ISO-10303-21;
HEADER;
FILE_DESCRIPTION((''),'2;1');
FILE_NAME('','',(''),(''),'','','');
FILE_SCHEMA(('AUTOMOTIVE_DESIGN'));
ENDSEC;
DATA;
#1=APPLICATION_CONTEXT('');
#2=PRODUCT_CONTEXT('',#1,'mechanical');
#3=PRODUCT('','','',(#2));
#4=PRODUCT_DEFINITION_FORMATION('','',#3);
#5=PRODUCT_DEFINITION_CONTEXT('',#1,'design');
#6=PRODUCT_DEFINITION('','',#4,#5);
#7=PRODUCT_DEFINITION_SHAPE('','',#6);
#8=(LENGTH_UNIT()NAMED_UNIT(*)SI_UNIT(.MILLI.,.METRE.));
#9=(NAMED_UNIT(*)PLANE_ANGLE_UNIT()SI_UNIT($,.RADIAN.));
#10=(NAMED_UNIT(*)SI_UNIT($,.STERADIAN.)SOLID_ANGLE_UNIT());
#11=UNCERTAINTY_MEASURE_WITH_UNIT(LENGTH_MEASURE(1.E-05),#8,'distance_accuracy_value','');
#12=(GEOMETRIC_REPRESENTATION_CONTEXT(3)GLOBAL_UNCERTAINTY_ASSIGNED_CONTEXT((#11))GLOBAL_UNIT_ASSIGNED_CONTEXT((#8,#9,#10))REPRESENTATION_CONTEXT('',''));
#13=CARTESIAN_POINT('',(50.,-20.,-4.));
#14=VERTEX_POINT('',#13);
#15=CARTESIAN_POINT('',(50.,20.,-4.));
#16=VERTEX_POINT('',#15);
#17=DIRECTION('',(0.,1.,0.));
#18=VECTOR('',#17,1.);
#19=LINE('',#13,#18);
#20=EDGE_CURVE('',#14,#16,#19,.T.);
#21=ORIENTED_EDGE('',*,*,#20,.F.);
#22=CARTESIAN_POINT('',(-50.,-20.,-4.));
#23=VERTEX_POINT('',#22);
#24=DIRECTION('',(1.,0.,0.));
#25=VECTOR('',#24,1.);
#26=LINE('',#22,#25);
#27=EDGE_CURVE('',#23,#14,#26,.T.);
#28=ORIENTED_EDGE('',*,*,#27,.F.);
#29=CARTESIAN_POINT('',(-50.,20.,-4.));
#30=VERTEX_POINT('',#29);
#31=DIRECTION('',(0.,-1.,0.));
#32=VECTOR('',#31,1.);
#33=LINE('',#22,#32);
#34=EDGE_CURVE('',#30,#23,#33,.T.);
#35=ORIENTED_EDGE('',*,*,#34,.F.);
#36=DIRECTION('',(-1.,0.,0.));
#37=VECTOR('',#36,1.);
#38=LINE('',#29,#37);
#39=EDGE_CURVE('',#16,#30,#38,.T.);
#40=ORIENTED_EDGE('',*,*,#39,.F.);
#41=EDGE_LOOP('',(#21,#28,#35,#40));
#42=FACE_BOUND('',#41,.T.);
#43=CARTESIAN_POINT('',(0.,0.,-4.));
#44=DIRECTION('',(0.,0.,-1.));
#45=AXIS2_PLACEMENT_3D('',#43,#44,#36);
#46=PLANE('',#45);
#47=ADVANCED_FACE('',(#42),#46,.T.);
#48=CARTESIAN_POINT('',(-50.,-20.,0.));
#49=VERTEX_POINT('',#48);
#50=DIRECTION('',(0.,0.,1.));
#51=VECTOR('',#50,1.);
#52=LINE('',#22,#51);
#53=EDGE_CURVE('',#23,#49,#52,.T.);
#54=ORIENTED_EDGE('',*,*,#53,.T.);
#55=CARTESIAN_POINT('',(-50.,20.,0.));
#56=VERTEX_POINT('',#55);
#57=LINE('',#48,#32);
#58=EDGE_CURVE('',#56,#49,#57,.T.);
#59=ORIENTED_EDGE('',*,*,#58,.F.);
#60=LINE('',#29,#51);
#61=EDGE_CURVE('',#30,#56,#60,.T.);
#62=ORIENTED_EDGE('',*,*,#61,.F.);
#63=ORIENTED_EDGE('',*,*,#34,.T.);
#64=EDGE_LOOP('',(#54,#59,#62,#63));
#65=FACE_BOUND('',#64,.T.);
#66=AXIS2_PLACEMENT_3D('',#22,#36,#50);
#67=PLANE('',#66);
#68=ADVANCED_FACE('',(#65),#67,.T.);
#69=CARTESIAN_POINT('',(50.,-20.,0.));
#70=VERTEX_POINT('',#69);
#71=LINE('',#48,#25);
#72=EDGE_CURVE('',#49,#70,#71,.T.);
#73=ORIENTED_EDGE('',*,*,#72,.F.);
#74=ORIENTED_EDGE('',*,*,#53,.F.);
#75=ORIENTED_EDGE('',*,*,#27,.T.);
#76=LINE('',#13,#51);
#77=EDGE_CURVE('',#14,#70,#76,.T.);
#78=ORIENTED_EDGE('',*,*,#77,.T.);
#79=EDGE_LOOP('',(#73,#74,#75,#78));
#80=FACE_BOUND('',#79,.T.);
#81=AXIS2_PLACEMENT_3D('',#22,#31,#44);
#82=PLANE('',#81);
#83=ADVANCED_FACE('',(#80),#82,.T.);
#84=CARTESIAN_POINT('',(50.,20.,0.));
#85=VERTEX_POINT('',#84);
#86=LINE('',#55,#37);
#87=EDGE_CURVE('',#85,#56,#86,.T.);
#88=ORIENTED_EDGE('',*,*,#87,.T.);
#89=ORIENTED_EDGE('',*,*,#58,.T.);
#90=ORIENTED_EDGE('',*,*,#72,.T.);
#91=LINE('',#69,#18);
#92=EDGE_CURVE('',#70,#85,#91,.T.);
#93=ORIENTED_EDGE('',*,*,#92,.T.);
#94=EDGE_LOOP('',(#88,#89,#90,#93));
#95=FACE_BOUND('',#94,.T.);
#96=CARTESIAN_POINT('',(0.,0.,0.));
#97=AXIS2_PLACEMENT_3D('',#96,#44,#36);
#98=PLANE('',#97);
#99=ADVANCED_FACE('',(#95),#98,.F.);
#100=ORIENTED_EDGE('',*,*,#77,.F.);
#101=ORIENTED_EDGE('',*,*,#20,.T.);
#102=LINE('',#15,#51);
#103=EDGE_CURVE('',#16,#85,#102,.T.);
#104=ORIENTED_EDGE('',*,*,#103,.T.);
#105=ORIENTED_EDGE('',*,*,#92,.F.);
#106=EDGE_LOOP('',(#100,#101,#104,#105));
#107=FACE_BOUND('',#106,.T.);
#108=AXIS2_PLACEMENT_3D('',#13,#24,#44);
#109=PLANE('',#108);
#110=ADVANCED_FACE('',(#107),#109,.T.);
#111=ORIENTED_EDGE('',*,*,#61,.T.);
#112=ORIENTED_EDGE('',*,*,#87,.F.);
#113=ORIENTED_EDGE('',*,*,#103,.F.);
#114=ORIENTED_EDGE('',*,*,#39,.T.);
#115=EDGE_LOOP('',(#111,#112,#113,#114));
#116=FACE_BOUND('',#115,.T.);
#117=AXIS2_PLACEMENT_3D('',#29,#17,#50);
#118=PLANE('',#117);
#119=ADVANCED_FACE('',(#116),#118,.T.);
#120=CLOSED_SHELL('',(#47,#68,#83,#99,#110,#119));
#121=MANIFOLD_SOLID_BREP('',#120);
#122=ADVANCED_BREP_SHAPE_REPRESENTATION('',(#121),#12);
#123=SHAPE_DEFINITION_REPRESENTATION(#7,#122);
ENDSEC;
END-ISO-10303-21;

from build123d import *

# Parameters (mm, degrees)
SKETCH_1_W             = 100
SKETCH_1_H             = 40
SM_BASE_FLANGE_1_DEPTH = 4


# Sheet-metal steps are written as plain solids
with BuildPart() as part:
    # Sketch 1 → Sm Base Flange 1 (new body)
    with BuildSketch(Plane.XY):
        Rectangle(SKETCH_1_W, SKETCH_1_H)
    extrude(amount=-SM_BASE_FLANGE_1_DEPTH)


solid = part.part
